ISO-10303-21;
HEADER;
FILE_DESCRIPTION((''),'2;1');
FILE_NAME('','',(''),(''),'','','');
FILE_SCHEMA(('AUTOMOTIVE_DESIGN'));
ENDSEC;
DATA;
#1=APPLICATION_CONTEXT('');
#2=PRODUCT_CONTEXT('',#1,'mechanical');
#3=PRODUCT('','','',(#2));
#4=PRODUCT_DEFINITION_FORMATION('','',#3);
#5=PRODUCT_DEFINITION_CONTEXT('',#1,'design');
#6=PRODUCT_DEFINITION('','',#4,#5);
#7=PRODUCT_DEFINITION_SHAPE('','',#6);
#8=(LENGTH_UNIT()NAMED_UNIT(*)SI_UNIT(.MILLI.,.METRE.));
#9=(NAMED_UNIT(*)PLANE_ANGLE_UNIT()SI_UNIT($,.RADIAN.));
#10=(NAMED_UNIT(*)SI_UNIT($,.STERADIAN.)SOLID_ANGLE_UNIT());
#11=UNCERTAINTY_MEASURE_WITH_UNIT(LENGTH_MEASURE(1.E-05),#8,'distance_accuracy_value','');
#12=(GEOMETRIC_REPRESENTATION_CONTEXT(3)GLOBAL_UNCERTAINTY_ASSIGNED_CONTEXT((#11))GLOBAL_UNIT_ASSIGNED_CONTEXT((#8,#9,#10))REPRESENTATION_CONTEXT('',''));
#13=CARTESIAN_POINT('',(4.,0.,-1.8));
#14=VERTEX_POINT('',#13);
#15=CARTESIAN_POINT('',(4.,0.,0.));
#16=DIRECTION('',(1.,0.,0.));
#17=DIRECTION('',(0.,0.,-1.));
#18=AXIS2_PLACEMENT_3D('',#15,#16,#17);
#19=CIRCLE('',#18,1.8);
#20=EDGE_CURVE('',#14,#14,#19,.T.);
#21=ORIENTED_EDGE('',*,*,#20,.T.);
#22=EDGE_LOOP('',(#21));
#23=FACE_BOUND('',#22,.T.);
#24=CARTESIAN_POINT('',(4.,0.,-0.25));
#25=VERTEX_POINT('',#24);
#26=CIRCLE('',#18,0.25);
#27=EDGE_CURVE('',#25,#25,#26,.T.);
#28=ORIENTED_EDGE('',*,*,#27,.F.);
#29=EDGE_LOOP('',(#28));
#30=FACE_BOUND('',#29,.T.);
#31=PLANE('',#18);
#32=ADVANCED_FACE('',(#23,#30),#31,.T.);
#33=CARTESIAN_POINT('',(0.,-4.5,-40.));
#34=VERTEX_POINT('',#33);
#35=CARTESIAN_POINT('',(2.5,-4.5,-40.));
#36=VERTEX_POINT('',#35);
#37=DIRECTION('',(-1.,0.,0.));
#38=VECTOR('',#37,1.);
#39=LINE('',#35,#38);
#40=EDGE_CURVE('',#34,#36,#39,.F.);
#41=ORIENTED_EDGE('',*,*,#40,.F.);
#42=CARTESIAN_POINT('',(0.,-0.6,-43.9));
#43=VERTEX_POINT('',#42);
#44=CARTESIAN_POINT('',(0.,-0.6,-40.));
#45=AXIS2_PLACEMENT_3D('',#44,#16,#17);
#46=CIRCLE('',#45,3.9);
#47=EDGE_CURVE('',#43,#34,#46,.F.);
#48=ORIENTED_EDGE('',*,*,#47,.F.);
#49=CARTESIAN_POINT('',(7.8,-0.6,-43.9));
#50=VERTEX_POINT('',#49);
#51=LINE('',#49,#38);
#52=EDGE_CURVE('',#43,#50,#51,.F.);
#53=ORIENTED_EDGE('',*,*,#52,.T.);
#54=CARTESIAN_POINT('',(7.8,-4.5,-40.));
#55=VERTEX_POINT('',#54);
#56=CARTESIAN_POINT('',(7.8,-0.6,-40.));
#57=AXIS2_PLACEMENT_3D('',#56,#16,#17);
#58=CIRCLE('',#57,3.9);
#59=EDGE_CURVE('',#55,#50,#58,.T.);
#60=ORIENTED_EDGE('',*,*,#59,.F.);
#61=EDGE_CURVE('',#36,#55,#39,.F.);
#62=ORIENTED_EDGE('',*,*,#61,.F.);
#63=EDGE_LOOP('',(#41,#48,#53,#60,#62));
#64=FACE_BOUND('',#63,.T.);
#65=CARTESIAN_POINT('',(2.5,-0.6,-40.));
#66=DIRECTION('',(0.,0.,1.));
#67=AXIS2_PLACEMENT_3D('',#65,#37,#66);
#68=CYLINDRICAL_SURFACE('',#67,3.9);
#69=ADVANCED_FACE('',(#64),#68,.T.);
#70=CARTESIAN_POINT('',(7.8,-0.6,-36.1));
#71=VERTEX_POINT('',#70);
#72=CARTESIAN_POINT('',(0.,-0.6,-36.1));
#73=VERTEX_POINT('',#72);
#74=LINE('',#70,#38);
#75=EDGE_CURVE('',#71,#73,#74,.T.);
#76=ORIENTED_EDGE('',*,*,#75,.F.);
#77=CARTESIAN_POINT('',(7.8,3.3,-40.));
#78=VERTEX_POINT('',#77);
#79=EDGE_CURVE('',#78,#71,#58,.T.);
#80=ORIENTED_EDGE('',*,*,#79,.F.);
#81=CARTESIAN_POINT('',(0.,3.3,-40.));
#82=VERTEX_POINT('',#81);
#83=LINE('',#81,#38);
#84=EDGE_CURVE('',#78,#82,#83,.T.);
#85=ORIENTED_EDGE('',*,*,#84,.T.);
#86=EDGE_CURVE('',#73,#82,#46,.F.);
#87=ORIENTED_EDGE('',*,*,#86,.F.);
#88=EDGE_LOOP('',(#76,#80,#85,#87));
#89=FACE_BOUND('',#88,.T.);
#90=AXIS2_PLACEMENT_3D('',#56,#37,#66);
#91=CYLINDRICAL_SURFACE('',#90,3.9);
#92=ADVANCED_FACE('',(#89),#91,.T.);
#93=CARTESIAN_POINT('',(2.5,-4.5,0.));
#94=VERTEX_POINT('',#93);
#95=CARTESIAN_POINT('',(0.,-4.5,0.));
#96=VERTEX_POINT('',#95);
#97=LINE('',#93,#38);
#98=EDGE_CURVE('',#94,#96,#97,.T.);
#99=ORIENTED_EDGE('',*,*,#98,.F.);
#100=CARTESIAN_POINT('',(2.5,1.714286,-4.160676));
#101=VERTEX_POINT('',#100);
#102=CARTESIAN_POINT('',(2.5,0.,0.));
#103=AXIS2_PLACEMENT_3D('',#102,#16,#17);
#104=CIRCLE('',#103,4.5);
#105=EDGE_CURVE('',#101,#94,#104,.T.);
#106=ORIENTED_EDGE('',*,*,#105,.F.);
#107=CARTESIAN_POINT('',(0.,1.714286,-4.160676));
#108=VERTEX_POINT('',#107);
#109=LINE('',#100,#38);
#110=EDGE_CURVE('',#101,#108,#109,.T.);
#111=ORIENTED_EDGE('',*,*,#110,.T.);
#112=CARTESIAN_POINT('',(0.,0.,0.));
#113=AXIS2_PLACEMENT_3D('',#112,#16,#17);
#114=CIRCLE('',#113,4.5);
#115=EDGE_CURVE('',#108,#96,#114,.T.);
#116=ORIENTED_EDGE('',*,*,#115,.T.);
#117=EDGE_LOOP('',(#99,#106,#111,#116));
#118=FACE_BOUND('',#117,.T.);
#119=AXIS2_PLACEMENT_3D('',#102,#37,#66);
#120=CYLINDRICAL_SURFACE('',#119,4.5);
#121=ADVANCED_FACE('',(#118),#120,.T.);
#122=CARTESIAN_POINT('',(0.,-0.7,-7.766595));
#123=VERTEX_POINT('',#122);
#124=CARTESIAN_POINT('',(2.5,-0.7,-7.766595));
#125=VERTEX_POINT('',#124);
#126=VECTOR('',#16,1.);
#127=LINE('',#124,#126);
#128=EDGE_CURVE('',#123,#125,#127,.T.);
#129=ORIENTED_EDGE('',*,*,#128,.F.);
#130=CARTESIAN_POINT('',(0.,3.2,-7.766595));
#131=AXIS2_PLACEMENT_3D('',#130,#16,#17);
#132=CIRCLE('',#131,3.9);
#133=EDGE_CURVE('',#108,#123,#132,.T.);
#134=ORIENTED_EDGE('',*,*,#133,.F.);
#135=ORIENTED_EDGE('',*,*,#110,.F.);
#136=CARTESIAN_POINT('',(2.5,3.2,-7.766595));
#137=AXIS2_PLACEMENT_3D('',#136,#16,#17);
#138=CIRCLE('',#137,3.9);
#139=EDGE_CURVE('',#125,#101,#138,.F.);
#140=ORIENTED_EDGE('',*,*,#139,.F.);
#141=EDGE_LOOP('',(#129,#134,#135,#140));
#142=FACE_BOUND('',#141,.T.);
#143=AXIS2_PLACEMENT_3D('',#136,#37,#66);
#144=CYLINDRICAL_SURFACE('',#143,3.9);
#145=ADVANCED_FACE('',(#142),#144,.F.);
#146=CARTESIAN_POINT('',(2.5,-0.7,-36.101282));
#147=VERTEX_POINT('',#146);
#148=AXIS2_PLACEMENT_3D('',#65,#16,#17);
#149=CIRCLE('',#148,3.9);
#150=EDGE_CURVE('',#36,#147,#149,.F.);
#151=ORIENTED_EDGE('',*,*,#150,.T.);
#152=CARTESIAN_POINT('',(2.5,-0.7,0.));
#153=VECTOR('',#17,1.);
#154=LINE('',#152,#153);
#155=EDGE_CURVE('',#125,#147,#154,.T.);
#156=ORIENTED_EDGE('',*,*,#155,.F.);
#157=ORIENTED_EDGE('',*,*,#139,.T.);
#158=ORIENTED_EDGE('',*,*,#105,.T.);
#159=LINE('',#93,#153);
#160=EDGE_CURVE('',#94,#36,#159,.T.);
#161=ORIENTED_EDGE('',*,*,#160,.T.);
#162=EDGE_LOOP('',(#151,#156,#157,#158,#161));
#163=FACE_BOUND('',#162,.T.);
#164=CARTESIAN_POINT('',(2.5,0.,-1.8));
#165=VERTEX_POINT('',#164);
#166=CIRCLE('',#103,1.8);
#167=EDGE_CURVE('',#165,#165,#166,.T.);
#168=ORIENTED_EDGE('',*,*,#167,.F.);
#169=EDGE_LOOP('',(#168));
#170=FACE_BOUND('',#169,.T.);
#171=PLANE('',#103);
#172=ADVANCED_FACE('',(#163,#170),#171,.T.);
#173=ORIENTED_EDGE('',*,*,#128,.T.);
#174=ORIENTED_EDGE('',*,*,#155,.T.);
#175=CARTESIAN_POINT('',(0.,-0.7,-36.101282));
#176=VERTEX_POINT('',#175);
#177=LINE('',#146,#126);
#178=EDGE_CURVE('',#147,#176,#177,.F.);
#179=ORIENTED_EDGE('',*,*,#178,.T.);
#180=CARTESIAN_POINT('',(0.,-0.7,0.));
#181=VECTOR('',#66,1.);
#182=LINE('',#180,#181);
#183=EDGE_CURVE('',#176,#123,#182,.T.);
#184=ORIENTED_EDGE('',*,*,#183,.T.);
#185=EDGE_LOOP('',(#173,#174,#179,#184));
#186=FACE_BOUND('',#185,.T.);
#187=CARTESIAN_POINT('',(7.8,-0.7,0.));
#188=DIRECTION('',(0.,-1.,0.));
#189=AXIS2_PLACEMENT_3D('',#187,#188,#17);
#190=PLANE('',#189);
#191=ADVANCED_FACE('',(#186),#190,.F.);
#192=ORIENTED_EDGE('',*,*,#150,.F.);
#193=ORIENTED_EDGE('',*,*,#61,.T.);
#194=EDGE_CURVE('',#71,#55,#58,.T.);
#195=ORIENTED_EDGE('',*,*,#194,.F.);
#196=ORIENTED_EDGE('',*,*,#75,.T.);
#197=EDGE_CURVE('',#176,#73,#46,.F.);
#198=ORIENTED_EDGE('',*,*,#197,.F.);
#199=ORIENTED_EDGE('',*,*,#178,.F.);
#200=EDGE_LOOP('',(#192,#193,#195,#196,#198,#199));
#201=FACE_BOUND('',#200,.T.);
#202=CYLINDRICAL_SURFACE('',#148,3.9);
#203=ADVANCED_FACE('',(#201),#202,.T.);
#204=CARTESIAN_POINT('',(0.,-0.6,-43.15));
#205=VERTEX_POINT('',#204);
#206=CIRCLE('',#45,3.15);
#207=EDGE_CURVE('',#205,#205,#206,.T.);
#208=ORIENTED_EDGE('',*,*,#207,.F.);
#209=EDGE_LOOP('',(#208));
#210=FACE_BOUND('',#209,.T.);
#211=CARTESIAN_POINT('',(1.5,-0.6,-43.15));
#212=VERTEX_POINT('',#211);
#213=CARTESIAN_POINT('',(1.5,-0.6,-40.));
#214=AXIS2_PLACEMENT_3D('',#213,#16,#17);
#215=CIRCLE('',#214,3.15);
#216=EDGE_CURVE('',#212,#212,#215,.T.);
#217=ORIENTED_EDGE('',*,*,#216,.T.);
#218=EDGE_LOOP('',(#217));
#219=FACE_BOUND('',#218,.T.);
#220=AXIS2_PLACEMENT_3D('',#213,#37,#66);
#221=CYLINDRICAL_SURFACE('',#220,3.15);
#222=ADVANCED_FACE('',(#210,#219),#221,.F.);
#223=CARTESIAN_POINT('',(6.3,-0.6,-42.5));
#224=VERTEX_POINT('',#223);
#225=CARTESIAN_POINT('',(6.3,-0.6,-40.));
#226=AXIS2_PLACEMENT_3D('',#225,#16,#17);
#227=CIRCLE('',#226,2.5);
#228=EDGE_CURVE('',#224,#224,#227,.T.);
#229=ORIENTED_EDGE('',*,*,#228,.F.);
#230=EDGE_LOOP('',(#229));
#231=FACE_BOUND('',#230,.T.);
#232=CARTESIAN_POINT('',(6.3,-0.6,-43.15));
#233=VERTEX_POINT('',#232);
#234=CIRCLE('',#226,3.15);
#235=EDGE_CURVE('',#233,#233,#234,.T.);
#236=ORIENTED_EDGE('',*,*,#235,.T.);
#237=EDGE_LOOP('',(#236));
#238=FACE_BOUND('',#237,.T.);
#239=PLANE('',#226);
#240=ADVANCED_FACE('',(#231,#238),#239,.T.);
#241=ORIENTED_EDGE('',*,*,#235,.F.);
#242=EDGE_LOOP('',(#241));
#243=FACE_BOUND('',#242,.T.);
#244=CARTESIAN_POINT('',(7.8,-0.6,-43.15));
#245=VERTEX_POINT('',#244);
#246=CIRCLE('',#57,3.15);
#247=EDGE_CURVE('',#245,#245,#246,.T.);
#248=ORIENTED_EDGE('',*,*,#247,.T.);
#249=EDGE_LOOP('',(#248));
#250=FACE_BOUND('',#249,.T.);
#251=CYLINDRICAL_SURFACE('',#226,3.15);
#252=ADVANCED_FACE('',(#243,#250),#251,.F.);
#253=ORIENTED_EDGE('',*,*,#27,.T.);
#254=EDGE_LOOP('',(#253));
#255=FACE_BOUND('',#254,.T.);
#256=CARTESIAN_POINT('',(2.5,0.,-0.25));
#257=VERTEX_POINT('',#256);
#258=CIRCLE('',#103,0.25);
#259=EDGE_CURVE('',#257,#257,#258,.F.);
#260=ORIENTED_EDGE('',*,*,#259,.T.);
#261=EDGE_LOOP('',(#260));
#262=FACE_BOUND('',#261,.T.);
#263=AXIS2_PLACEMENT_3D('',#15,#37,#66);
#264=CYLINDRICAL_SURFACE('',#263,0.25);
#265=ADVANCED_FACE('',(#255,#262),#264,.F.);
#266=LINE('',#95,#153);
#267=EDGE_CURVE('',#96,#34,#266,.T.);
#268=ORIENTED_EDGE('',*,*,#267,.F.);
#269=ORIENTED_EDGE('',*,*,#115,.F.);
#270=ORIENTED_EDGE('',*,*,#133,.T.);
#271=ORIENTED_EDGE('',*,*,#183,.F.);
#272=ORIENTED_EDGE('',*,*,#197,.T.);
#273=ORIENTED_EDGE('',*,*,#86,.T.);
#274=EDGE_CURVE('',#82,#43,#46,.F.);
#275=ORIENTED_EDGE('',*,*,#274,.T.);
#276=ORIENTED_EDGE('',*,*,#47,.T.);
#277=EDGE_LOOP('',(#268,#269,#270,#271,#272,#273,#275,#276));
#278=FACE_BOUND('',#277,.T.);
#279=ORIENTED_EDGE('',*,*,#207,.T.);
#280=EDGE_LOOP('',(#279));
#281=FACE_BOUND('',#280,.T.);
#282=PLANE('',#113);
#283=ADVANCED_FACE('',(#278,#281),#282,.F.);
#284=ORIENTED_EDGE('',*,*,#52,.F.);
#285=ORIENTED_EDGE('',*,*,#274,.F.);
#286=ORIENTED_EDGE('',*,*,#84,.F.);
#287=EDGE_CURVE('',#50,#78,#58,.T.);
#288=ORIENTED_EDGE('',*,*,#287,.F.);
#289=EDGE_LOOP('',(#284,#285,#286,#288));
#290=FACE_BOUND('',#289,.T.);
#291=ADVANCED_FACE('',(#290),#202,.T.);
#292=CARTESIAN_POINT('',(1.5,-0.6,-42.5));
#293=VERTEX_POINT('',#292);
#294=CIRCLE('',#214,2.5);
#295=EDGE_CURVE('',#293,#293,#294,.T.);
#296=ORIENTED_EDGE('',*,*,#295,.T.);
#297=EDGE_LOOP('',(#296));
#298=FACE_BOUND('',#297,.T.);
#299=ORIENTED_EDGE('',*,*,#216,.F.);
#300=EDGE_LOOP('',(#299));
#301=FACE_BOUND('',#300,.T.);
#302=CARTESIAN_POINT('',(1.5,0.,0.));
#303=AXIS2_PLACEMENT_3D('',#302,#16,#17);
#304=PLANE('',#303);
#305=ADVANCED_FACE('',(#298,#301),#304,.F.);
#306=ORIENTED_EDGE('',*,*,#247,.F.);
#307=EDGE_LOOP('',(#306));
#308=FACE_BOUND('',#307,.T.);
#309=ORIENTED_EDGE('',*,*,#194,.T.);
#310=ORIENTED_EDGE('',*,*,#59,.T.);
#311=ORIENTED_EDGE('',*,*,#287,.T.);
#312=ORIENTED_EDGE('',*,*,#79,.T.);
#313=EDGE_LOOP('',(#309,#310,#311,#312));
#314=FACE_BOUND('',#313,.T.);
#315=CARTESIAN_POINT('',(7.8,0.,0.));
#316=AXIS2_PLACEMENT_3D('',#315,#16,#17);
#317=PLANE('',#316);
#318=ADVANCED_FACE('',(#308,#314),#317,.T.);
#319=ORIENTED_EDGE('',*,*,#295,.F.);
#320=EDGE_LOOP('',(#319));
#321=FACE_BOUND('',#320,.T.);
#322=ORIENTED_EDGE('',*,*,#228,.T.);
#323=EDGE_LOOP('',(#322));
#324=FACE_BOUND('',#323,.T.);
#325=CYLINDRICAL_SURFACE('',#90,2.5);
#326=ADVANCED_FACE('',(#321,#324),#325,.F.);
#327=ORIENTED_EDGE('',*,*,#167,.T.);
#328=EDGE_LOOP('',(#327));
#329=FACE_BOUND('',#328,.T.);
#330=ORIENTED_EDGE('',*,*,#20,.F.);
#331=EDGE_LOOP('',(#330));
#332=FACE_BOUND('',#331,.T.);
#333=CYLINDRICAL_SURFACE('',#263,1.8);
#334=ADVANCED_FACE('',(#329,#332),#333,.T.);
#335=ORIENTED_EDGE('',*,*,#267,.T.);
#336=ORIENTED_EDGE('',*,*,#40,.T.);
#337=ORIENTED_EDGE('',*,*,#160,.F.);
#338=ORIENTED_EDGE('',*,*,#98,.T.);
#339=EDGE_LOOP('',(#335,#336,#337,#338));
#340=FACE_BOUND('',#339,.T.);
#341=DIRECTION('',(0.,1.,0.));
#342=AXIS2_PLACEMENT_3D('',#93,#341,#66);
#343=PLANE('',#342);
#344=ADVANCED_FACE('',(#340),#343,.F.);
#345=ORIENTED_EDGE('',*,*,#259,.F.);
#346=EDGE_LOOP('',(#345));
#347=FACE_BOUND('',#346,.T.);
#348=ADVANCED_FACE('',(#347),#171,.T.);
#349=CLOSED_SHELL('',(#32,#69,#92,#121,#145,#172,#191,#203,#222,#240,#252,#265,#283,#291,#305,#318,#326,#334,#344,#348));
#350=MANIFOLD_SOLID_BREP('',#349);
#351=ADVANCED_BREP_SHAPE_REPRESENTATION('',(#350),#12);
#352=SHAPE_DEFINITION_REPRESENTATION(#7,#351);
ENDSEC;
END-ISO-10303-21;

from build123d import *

# Parameters (mm, degrees)
SKETCH_1_R               = 4.5
SKETCH_1_W               = 43.9
SKETCH_1_H               = 7.8
EXTRUDE_1_DEPTH          = 2.5
EXTRUDE_START            = 2.5
SKETCH_1_6_R             = 1.8
SKETCH_1_6_R_2           = 0.25
EXTRUDE_3_DEPTH          = 1.5
SKETCH_1_5_W             = 7.8
SKETCH_1_5_H             = 7.8
EXTRUDE_2_DEPTH          = 7.8
SKETCH_1_7_R             = 2.5
CUT_EXTRUDE_1_DEPTH      = 45.814060294
SKETCH_1_8_R             = 3.15
SKETCH_1_8_R_2           = 2.5
CUT_EXTRUDE_2_DEPTH      = 1.5
CUT_EXTRUDE_START        = 6.3
SKETCH_1_9_R             = 3.15
SKETCH_1_9_R_2           = 2.5
CUT_EXTRUDE_3_DEPTH      = 1.5
CUT_EXTRUDE_4_DEPTH      = 45.814060294
FILLET_1_R               = 3.9
CUT_EXTRUDE_5_DEPTH      = 51.552448012
CUT_EXTRUDE_5_DEPTH_BACK = 51.552448012
SKETCH_3_W               = 64.704037325
SKETCH_3_H               = 20.946447886


with BuildPart() as part:
    # 草图1 → 凸台-拉伸1 (new body)
    with BuildSketch(Plane(origin=(0, 0, 0), x_dir=(0, 0, -1), z_dir=(1, 0, 0))):
        Circle(SKETCH_1_R)
        with Locations((21.95, -0.6)):
            Rectangle(SKETCH_1_W, SKETCH_1_H)
    extrude(amount=EXTRUDE_1_DEPTH)

    # 草图1<6> → 凸台-拉伸3 (add)
    with BuildSketch(Plane(origin=(0, 0, 0), x_dir=(0, 0, -1), z_dir=(1, 0, 0)).offset(EXTRUDE_START)):
        Circle(SKETCH_1_6_R)
        Circle(SKETCH_1_6_R_2, mode=Mode.SUBTRACT)
    extrude(amount=EXTRUDE_3_DEPTH)

    # 草图1<5> → 凸台-拉伸2 (add)
    with BuildSketch(Plane(origin=(0, 0, 0), x_dir=(0, 0, -1), z_dir=(1, 0, 0))):
        with Locations((40, -0.6)):
            Rectangle(SKETCH_1_5_W, SKETCH_1_5_H)
    extrude(amount=EXTRUDE_2_DEPTH)

    # 草图1<7> → 切除-拉伸1 (cut, through all)
    with BuildSketch(Plane(origin=(0, 0, 0), x_dir=(0, 0, -1), z_dir=(1, 0, 0))):
        with Locations((40, -0.6)):
            Circle(SKETCH_1_7_R)
    extrude(amount=CUT_EXTRUDE_1_DEPTH, mode=Mode.SUBTRACT)

    # 草图1<8> → 切除-拉伸2 (cut)
    with BuildSketch(Plane(origin=(0, 0, 0), x_dir=(0, 0, -1), z_dir=(1, 0, 0))):
        with Locations((40, -0.6)):
            Circle(SKETCH_1_8_R)
        with Locations((40, -0.6)):
            Circle(SKETCH_1_8_R_2, mode=Mode.SUBTRACT)
    extrude(amount=CUT_EXTRUDE_2_DEPTH, mode=Mode.SUBTRACT)

    # 草图1<9> → 切除-拉伸3 (cut)
    with BuildSketch(Plane(origin=(0, 0, 0), x_dir=(0, 0, -1), z_dir=(1, 0, 0)).offset(CUT_EXTRUDE_START)):
        with Locations((40, -0.6)):
            Circle(SKETCH_1_9_R)
        with Locations((40, -0.6)):
            Circle(SKETCH_1_9_R_2, mode=Mode.SUBTRACT)
    extrude(amount=CUT_EXTRUDE_3_DEPTH, mode=Mode.SUBTRACT)

    # 草图2 → 切除-拉伸4 (cut, through all)
    with BuildSketch(Plane.ZY):
        Polygon((-4.5, 3.3), (-36.1, 3.3), (-36.1, -0.7), (-4.5, -0.7), (-4.5, 0), align=None)
        with BuildLine():
            Line((-3.059411708, 3.3), (-4.5, 3.3))
            Line((-4.5, 3.3), (-4.5, 0))
            ThreePointArc((-4.5, 0), (-4.124157653, 1.800367645), (-3.059411708, 3.3))
        make_face()
    extrude(amount=-CUT_EXTRUDE_4_DEPTH, mode=Mode.SUBTRACT)

    # 圆角1
    # the kernel refuses this fillet: 3.9 mm, written as the material it adds along each edge
    with BuildSketch(Plane(origin=(0, -0.7, -4.5), x_dir=(0, 0, -1), z_dir=(1, 0, 0))) as fillet_1_piece_1:
        with BuildLine():
            CenterArc((3.266595136, 3.9), FILLET_1_R, 202.392687805, 67.607312195)
            Line((-0.339324035, 2.414285714), (-0.699915952, 2.265714286))
            ThreePointArc((-0.699915952, 2.265714286), (-0.39, 0.7), (-0.39, 0))
            Line((-0.39, 0), (0, -0.39))
            Line((0, -0.39), (3.266595136, -0.39))
            Line((3.266595136, -0.39), (3.266595136, 0))
        make_face()
    extrude(amount=2.5)
    # the kernel refuses this fillet: 3.9 mm, written as the material it takes off along each edge
    with BuildSketch(Plane(origin=(-9.75, -4.5, -43.9), x_dir=(0, 1, 0), z_dir=(1, 0, 0))) as fillet_1_2_piece_1:
        with BuildLine():
            CenterArc((FILLET_1_R, FILLET_1_R), FILLET_1_R, 180, 90)
            Line((0, FILLET_1_R), (0, 0))
            Line((0, 0), (FILLET_1_R, 0))
        make_face()
    extrude(amount=27.3, mode=Mode.SUBTRACT)
    with BuildSketch(Plane(origin=(17.55, 3.3, -43.9), x_dir=(0, 0, 1), z_dir=(-1, 0, 0)), Plane(origin=(17.55, 3.3, -36.1), x_dir=(0, -1, 0), z_dir=(-1, 0, 0))) as fillet_1_2_piece_2:
        with BuildLine():
            CenterArc((FILLET_1_R, -FILLET_1_R), FILLET_1_R, 90, 90)
            Line((0, -FILLET_1_R), (0, 0))
            Line((0, 0), (FILLET_1_R, 0))
        make_face()
    extrude(amount=27.3, mode=Mode.SUBTRACT)
    with BuildSketch(Plane(origin=(-7.25, -4.5, -36.1), x_dir=(0, 1, 0), z_dir=(1, 0, 0))) as fillet_1_2_piece_3_section:
        with BuildLine():
            CenterArc((FILLET_1_R, -FILLET_1_R), FILLET_1_R, 90, 90)
            Line((0, -FILLET_1_R), (0, 0))
            Line((0, 0), (FILLET_1_R, 0))
        make_face()
    fillet_1_2_piece_3 = extrude(amount=24.8, mode=Mode.PRIVATE)
    fillet_1_2_piece_3 = split(fillet_1_2_piece_3, bisect_by=Plane(origin=(1.25, -0.7, -36.100384668), z_dir=(0, 1, 0)), keep=Keep.TOP, mode=Mode.PRIVATE)
    add(fillet_1_2_piece_3, mode=Mode.SUBTRACT)
    with BuildSketch(Plane(origin=(2.5, -4.5, -36.1), x_dir=(0, 1, 0), z_dir=(1, 0, 0))) as fillet_1_2_piece_4:
        with BuildLine():
            CenterArc((FILLET_1_R, -FILLET_1_R), FILLET_1_R, 90, 90)
            Line((0, -FILLET_1_R), (0, 0))
            Line((0, 0), (FILLET_1_R, 0))
        make_face()
    extrude(amount=15.05, mode=Mode.SUBTRACT)


with BuildPart() as body_2:
    # 镜向2: mirrored copy
    add(part.part.mirror(Plane.ZX.offset(-10)))

    # 草图3 → 切除-拉伸5 (cut, two sides: drawn at the far end of the back side and taken through both)
    with BuildSketch(Plane(origin=(2.5, 0, 0), x_dir=(0, 0, -1), z_dir=(1, 0, 0)).offset(-CUT_EXTRUDE_5_DEPTH_BACK)):
        with Locations((21.266459283, -20.282495136)):
            Rectangle(SKETCH_3_W, SKETCH_3_H)
    extrude(amount=CUT_EXTRUDE_5_DEPTH + CUT_EXTRUDE_5_DEPTH_BACK, mode=Mode.SUBTRACT)


solid = part.part
